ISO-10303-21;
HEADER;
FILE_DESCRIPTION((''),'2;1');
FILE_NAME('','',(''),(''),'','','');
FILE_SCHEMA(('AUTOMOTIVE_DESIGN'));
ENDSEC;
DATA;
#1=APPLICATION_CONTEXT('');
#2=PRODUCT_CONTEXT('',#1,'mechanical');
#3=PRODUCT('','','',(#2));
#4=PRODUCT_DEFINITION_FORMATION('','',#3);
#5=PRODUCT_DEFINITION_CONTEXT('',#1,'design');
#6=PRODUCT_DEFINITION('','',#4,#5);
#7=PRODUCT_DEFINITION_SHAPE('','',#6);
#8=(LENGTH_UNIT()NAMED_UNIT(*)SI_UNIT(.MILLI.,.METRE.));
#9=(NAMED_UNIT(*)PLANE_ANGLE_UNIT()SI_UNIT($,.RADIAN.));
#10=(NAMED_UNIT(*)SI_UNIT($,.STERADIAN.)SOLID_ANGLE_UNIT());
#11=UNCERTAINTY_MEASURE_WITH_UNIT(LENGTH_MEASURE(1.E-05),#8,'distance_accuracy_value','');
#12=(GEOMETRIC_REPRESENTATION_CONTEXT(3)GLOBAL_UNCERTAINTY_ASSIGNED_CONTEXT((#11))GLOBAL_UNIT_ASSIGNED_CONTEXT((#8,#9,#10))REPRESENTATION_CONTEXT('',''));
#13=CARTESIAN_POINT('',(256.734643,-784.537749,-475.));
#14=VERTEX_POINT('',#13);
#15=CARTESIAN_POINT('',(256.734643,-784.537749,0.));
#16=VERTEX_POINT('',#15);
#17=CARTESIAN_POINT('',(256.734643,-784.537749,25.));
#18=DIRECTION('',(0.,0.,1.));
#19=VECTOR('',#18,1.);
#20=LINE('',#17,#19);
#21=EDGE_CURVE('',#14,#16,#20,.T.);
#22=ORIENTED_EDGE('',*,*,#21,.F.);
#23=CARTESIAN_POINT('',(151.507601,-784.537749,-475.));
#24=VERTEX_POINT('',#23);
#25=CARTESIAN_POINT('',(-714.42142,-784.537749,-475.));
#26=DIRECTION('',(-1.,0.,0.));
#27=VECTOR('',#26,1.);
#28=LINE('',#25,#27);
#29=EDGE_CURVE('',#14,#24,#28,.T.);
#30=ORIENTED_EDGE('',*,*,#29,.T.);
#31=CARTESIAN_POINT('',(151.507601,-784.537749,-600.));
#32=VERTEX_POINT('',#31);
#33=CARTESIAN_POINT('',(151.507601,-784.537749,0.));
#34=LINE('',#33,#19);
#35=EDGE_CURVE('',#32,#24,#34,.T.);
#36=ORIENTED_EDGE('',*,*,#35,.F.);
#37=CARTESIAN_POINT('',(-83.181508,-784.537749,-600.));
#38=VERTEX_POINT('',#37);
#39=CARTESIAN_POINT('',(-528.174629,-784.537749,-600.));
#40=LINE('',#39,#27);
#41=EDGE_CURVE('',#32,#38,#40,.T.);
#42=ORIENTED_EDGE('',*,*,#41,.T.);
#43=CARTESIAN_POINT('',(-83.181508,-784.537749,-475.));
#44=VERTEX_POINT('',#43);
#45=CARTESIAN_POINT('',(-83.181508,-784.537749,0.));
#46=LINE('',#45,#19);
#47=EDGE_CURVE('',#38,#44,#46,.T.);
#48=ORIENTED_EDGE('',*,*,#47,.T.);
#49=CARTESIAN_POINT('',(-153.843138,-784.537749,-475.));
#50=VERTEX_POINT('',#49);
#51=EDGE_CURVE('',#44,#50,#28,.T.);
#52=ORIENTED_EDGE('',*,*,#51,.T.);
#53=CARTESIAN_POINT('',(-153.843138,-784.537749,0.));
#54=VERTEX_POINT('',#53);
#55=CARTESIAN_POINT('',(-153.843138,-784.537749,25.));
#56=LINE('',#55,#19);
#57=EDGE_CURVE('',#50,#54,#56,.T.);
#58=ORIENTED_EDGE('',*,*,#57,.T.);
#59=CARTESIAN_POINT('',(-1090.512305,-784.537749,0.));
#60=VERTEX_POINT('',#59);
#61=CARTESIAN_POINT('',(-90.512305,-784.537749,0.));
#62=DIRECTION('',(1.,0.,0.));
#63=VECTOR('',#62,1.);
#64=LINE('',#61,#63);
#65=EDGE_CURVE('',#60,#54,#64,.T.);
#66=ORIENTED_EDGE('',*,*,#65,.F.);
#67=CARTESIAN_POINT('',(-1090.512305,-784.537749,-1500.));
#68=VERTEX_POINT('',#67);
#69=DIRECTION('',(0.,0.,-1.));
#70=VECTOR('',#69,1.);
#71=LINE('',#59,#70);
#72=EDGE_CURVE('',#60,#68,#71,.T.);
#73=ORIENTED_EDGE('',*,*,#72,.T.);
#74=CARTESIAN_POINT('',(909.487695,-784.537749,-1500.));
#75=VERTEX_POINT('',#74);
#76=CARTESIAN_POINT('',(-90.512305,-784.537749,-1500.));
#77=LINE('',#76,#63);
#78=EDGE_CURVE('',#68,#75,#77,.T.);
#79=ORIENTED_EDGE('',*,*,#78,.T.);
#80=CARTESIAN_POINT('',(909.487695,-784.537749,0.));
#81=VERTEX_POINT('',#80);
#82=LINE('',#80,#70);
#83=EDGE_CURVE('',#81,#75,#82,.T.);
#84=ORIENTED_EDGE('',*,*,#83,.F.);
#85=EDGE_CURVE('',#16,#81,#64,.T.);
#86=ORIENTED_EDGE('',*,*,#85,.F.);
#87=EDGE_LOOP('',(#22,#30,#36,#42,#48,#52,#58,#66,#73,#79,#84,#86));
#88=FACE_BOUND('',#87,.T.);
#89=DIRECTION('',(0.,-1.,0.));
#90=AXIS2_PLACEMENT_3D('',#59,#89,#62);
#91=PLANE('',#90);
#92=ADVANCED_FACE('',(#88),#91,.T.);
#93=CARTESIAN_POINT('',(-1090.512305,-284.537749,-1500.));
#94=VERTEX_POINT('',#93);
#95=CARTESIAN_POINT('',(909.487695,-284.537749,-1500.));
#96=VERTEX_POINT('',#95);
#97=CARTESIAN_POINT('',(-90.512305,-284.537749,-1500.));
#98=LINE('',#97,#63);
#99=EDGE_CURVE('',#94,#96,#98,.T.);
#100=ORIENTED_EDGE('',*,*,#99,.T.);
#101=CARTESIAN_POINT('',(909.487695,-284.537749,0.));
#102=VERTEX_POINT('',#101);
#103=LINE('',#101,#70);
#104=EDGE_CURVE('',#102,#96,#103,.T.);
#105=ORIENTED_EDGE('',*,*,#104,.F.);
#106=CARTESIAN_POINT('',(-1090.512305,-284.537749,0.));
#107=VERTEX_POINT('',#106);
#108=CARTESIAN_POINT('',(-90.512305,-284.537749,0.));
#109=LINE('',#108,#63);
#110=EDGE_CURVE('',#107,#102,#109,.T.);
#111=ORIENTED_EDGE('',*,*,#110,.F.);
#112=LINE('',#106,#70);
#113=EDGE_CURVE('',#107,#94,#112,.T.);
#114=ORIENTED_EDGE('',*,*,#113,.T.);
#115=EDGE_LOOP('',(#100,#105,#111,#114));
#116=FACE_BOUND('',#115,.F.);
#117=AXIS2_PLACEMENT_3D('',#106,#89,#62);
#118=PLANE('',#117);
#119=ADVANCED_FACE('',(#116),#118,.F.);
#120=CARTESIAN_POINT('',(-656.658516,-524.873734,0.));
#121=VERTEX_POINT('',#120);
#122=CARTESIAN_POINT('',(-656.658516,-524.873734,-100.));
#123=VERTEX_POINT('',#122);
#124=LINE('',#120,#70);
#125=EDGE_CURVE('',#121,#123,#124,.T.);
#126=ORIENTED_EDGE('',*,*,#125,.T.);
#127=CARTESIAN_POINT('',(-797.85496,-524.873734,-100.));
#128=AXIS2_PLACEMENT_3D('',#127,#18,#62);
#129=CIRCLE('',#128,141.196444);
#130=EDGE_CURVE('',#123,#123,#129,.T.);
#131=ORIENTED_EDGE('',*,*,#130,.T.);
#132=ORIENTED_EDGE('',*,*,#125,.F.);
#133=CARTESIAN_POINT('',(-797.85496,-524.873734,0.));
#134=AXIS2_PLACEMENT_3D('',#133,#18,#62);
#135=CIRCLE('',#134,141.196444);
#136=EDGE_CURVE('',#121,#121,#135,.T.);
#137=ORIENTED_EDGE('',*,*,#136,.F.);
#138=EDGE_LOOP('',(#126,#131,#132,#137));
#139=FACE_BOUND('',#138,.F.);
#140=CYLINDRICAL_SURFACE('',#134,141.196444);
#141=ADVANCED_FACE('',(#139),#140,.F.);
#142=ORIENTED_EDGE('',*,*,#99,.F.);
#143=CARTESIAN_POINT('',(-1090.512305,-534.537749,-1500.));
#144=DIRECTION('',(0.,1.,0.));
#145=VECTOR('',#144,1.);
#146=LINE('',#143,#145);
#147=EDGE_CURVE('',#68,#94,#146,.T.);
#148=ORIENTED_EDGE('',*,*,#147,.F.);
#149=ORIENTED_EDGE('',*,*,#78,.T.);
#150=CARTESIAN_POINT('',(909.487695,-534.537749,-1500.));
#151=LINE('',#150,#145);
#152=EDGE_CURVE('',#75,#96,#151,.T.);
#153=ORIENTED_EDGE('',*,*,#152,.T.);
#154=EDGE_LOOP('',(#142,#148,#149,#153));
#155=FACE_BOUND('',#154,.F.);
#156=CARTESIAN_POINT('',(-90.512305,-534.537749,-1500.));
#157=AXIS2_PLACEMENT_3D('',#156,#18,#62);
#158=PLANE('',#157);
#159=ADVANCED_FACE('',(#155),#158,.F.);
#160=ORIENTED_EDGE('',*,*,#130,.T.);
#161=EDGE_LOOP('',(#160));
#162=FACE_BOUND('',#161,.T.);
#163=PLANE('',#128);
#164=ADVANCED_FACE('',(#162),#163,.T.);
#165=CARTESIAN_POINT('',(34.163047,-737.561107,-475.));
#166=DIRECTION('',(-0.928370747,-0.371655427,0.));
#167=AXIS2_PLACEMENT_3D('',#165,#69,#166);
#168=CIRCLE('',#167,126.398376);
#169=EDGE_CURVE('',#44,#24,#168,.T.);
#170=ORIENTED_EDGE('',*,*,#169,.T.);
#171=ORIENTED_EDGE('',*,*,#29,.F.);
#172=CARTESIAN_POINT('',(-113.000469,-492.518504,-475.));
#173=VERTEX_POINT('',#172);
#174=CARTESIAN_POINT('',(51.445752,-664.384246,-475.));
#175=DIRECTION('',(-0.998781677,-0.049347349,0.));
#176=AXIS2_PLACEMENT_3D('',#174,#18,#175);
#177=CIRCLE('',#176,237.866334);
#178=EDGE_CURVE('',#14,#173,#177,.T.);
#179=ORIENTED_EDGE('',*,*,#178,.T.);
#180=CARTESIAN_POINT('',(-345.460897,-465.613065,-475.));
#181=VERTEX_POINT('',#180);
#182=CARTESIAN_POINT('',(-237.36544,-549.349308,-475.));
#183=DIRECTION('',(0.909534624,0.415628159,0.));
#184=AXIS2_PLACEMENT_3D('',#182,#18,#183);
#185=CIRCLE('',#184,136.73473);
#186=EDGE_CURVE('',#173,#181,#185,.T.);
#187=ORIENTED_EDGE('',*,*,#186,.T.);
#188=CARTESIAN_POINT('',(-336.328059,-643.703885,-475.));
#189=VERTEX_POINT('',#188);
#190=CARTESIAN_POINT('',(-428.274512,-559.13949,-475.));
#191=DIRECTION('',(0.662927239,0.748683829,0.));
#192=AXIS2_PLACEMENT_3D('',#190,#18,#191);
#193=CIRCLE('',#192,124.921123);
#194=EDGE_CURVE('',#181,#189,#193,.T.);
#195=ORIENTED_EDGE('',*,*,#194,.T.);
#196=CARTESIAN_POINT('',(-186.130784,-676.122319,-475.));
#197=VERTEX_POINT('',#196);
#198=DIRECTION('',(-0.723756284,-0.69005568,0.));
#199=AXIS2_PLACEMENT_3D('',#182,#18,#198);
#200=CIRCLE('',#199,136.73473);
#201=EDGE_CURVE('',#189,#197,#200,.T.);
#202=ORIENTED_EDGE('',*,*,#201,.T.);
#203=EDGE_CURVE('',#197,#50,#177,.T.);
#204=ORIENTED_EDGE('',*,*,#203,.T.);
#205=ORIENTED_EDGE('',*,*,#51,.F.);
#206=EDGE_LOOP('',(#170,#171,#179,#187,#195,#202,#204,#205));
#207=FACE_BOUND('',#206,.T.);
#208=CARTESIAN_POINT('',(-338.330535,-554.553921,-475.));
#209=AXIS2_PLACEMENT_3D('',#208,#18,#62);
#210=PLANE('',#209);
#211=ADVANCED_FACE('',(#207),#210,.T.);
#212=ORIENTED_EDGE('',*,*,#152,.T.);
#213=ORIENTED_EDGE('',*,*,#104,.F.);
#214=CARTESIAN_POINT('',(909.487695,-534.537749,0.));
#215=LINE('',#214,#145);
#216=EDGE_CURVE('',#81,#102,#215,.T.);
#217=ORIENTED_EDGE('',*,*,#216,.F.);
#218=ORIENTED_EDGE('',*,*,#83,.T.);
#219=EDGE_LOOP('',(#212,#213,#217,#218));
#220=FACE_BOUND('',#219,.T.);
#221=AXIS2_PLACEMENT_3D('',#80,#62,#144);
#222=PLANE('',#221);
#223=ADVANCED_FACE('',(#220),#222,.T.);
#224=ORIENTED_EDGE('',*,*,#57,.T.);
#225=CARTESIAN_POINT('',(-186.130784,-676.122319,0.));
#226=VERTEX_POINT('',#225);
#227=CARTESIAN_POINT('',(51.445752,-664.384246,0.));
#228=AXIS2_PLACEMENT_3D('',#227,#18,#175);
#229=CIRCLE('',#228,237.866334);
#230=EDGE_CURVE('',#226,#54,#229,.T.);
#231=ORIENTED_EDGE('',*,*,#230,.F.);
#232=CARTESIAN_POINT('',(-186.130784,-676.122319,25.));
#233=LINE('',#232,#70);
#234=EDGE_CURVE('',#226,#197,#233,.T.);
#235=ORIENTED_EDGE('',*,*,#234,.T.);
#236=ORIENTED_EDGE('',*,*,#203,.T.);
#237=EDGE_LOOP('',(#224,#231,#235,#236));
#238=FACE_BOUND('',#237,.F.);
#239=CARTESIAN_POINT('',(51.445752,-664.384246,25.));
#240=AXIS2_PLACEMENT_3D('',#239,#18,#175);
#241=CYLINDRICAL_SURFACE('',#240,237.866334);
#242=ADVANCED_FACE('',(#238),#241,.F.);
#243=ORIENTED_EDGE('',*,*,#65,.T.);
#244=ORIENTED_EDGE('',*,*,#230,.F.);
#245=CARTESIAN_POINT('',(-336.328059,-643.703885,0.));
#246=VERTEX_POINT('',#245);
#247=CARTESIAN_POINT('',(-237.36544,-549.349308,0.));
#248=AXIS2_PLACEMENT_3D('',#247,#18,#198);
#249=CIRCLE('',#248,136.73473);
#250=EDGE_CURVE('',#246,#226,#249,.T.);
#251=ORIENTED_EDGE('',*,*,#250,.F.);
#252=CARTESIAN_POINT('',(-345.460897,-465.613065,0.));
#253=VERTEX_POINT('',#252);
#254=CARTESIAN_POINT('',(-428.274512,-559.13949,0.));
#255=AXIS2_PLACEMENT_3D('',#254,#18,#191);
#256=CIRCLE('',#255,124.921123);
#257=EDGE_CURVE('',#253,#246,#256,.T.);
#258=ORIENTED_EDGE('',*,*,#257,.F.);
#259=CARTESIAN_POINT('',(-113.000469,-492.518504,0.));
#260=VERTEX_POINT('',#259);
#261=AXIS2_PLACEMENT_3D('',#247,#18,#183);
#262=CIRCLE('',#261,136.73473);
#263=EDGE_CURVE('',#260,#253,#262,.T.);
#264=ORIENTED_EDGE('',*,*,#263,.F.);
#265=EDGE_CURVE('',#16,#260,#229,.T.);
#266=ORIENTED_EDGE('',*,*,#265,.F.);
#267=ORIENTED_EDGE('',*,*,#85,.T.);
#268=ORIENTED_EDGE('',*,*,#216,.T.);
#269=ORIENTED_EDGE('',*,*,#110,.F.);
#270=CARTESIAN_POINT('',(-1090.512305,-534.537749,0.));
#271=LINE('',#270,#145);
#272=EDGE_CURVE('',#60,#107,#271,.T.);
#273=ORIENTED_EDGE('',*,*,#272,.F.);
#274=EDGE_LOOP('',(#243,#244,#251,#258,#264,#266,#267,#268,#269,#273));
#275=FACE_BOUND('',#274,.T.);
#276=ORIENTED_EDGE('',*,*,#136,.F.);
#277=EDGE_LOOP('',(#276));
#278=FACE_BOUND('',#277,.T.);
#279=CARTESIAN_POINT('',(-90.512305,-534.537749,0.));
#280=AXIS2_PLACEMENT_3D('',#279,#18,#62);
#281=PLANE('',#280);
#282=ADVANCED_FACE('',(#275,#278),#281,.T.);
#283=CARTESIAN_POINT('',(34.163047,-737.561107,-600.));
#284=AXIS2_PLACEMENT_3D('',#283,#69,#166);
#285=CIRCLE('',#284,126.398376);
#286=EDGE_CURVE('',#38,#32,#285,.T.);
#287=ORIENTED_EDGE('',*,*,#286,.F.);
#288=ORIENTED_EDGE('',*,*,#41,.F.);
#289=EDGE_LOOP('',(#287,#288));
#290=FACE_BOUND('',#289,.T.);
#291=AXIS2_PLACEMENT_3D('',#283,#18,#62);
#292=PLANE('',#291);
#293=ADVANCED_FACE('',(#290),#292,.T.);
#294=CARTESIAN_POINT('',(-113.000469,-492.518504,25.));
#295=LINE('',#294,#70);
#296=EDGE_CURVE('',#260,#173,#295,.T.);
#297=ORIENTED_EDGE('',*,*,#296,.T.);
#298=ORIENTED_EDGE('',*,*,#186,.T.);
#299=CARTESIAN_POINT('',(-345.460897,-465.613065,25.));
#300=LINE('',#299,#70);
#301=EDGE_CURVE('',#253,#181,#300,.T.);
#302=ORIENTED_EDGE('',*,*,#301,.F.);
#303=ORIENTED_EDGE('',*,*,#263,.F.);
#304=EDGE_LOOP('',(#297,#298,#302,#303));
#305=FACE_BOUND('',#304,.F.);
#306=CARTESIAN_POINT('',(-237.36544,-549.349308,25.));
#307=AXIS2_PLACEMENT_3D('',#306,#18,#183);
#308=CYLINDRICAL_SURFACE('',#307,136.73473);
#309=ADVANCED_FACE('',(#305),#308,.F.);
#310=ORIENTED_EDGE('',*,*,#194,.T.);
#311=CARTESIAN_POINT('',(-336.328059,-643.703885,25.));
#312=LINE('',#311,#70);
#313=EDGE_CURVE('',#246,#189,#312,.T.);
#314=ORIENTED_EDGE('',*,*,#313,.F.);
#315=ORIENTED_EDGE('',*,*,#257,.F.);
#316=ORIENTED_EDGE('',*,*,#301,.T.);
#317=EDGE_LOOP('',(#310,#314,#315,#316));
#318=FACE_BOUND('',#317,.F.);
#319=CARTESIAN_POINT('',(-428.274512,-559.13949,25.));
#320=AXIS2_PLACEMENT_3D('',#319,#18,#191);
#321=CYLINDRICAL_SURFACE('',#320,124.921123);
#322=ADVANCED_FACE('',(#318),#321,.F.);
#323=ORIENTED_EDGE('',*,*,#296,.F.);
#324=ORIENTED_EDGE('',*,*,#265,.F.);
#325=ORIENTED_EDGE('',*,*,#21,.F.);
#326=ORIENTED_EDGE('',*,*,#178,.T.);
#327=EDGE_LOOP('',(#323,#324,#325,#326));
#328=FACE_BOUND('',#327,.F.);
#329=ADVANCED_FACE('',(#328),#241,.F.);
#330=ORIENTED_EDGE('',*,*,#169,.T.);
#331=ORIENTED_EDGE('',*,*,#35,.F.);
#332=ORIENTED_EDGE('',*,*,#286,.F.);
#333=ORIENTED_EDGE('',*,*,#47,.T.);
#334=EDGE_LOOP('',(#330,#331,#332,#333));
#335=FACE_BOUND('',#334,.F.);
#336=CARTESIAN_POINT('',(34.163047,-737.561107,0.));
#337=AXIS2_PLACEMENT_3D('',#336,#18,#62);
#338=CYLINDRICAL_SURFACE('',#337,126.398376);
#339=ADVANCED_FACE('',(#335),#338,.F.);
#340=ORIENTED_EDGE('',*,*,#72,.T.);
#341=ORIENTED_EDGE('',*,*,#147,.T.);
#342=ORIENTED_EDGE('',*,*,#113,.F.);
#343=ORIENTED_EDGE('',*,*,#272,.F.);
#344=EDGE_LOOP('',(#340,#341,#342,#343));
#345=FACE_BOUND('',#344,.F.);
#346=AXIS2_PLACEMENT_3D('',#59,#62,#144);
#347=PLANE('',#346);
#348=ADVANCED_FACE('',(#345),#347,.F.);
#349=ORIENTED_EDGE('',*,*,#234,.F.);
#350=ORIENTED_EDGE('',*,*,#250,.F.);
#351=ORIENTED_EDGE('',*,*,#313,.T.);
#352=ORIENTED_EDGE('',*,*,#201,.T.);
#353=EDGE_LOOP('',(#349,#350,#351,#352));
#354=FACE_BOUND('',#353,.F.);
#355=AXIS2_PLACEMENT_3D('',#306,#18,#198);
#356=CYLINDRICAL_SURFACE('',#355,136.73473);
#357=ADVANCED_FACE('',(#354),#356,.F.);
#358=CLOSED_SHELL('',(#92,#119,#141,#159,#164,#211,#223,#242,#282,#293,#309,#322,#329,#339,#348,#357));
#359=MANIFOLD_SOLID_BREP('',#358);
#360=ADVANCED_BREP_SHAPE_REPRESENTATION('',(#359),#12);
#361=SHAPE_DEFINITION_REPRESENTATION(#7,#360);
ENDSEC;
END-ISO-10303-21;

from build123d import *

# Parameters (mm, degrees)
F0_W      = 2000
F0_H      = 500
F1_DEPTH  = 1500
F2_R      = 141.1964442428
F3_DEPTH  = 100
F4_R      = 34.4012155817
F1_FACE_W = 2000
F1_FACE_H = 500
F1_FACE_R = 141.1964442428
F5_DEPTH  = 300
F6_R      = 22.2612942047
F7_DEPTH  = 25
F11_DEPTH = 25
F12_DEPTH = 500
F13_R     = 126.398375951
F14_DEPTH = 600


# Not quite as in the source:
# - a feature of the source that left no trace in its solid (it failed there, or was rolled back) is left out


with BuildPart() as f1:
    # F0 (on Top) → F1 (new body)
    with BuildSketch(Plane.XY):
        with Locations((-90.5123054981, -534.5377490795)):
            Rectangle(F0_W, F0_H)
    extrude(amount=-F1_DEPTH)

    # F2 (on Top) → F3 (cut)
    with BuildSketch(Plane.XY):
        with Locations((-797.8549599648, -524.8737335205)):
            Circle(F2_R)
    extrude(amount=-F3_DEPTH, mode=Mode.SUBTRACT)

    # F4 (on face) + F1_face (on face) → F5 (cut)
    with BuildSketch(Plane.XY.offset(-100)):
        with Locations((-826.4881968498, -472.618997097)):
            Circle(F4_R)
    with BuildSketch(Plane(origin=(-43.2497509657, -535.1834701589, 0), x_dir=(1, 0, 0), z_dir=(0, 0, 1))):
        with Locations((-47.2625545324, 0.6457210794)):
            Rectangle(F1_FACE_W, F1_FACE_H)
        with Locations((-754.605208999, 10.3097366384)):
            Circle(F1_FACE_R, mode=Mode.SUBTRACT)
    extrude(amount=F5_DEPTH, mode=Mode.SUBTRACT)

    # F6 (on Top) → F7 (cut)
    with BuildSketch(Plane.XY):
        with Locations((-837.3667597771, -527.3413062096)):
            Circle(F6_R)
    extrude(amount=-F7_DEPTH, mode=Mode.SUBTRACT)

    # F10 (on Top) → F11 (join)
    with BuildSketch(Plane.XY):
        with BuildLine():
            ThreePointArc((-336.3280592399, -643.7038848361), (-311.8886426753, -604.522487328), (-303.3533888527, -559.1394901276))
            ThreePointArc((-303.3533888527, -559.1394901276), (-314.3656518823, -507.8553931627), (-345.4608968402, -465.6130651073))
            ThreePointArc((-345.4608968402, -465.6130651073), (-373.9207280875, -556.3521241934), (-336.3280592399, -643.7038848361))
        make_face()
        with BuildLine():
            ThreePointArc((-345.4608968402, -465.6130651073), (-314.3656518823, -507.8553931627), (-303.3533888527, -559.1394901276))
            ThreePointArc((-303.3533888527, -559.1394901276), (-311.8886426753, -604.522487328), (-336.3280592399, -643.7038848361))
            ThreePointArc((-336.3280592399, -643.7038848361), (-266.2138077643, -683.0061743425), (-186.1307836251, -676.1223189436))
            ThreePointArc((-186.1307836251, -676.1223189436), (-169.5365195374, -576.3659050684), (-113.0004686355, -492.5185040457))
            ThreePointArc((-113.0004686355, -492.5185040457), (-221.6444367274, -413.5213420531), (-345.4608968402, -465.6130651073))
        make_face()
        with BuildLine():
            ThreePointArc((-336.3280592399, -643.7038848361), (-373.9207280875, -556.3521241934), (-345.4608968402, -465.6130651073))
            ThreePointArc((-345.4608968402, -465.6130651073), (-553.0316980704, -565.5372770485), (-336.3280592399, -643.7038848361))
        make_face()
        with BuildLine():
            ThreePointArc((289.3120863194, -664.3842458725), (144.8913865697, -445.641688806), (-113.0004686355, -492.5185040457))
            ThreePointArc((-113.0004686355, -492.5185040457), (-103.7589334647, -520.2685961551), (-100.6307099798, -549.3493080139))
            ThreePointArc((-100.6307099798, -549.3493080139), (-124.0033138355, -625.8046199509), (-186.1307836251, -676.1223189436))
            ThreePointArc((-186.1307836251, -676.1223189436), (57.3165773299, -902.1781192905), (289.3120863194, -664.3842458725))
        make_face()
        with BuildLine():
            ThreePointArc((-100.6307099798, -549.3493080139), (-103.7589334647, -520.2685961551), (-113.0004686355, -492.5185040457))
            ThreePointArc((-113.0004686355, -492.5185040457), (-169.5365195374, -576.3659050684), (-186.1307836251, -676.1223189436))
            ThreePointArc((-186.1307836251, -676.1223189436), (-124.0033138355, -625.8046199509), (-100.6307099798, -549.3493080139))
        make_face()
    extrude(amount=F11_DEPTH)

    # F12 (cut): a face of the model
    f12_faces = [f1.faces().sort_by_distance(p)[0] for p in [
        (-80.6836957397, -625.9699801923, 25),
    ]]
    extrude(f12_faces, amount=-F12_DEPTH, mode=Mode.SUBTRACT)

    # F13 (on Top) → F14 (cut)
    with BuildSketch(Plane.XY):
        with Locations((34.1630466282, -737.5611066818)):
            Circle(F13_R)
    extrude(amount=-F14_DEPTH, mode=Mode.SUBTRACT)


solid = f1.part
